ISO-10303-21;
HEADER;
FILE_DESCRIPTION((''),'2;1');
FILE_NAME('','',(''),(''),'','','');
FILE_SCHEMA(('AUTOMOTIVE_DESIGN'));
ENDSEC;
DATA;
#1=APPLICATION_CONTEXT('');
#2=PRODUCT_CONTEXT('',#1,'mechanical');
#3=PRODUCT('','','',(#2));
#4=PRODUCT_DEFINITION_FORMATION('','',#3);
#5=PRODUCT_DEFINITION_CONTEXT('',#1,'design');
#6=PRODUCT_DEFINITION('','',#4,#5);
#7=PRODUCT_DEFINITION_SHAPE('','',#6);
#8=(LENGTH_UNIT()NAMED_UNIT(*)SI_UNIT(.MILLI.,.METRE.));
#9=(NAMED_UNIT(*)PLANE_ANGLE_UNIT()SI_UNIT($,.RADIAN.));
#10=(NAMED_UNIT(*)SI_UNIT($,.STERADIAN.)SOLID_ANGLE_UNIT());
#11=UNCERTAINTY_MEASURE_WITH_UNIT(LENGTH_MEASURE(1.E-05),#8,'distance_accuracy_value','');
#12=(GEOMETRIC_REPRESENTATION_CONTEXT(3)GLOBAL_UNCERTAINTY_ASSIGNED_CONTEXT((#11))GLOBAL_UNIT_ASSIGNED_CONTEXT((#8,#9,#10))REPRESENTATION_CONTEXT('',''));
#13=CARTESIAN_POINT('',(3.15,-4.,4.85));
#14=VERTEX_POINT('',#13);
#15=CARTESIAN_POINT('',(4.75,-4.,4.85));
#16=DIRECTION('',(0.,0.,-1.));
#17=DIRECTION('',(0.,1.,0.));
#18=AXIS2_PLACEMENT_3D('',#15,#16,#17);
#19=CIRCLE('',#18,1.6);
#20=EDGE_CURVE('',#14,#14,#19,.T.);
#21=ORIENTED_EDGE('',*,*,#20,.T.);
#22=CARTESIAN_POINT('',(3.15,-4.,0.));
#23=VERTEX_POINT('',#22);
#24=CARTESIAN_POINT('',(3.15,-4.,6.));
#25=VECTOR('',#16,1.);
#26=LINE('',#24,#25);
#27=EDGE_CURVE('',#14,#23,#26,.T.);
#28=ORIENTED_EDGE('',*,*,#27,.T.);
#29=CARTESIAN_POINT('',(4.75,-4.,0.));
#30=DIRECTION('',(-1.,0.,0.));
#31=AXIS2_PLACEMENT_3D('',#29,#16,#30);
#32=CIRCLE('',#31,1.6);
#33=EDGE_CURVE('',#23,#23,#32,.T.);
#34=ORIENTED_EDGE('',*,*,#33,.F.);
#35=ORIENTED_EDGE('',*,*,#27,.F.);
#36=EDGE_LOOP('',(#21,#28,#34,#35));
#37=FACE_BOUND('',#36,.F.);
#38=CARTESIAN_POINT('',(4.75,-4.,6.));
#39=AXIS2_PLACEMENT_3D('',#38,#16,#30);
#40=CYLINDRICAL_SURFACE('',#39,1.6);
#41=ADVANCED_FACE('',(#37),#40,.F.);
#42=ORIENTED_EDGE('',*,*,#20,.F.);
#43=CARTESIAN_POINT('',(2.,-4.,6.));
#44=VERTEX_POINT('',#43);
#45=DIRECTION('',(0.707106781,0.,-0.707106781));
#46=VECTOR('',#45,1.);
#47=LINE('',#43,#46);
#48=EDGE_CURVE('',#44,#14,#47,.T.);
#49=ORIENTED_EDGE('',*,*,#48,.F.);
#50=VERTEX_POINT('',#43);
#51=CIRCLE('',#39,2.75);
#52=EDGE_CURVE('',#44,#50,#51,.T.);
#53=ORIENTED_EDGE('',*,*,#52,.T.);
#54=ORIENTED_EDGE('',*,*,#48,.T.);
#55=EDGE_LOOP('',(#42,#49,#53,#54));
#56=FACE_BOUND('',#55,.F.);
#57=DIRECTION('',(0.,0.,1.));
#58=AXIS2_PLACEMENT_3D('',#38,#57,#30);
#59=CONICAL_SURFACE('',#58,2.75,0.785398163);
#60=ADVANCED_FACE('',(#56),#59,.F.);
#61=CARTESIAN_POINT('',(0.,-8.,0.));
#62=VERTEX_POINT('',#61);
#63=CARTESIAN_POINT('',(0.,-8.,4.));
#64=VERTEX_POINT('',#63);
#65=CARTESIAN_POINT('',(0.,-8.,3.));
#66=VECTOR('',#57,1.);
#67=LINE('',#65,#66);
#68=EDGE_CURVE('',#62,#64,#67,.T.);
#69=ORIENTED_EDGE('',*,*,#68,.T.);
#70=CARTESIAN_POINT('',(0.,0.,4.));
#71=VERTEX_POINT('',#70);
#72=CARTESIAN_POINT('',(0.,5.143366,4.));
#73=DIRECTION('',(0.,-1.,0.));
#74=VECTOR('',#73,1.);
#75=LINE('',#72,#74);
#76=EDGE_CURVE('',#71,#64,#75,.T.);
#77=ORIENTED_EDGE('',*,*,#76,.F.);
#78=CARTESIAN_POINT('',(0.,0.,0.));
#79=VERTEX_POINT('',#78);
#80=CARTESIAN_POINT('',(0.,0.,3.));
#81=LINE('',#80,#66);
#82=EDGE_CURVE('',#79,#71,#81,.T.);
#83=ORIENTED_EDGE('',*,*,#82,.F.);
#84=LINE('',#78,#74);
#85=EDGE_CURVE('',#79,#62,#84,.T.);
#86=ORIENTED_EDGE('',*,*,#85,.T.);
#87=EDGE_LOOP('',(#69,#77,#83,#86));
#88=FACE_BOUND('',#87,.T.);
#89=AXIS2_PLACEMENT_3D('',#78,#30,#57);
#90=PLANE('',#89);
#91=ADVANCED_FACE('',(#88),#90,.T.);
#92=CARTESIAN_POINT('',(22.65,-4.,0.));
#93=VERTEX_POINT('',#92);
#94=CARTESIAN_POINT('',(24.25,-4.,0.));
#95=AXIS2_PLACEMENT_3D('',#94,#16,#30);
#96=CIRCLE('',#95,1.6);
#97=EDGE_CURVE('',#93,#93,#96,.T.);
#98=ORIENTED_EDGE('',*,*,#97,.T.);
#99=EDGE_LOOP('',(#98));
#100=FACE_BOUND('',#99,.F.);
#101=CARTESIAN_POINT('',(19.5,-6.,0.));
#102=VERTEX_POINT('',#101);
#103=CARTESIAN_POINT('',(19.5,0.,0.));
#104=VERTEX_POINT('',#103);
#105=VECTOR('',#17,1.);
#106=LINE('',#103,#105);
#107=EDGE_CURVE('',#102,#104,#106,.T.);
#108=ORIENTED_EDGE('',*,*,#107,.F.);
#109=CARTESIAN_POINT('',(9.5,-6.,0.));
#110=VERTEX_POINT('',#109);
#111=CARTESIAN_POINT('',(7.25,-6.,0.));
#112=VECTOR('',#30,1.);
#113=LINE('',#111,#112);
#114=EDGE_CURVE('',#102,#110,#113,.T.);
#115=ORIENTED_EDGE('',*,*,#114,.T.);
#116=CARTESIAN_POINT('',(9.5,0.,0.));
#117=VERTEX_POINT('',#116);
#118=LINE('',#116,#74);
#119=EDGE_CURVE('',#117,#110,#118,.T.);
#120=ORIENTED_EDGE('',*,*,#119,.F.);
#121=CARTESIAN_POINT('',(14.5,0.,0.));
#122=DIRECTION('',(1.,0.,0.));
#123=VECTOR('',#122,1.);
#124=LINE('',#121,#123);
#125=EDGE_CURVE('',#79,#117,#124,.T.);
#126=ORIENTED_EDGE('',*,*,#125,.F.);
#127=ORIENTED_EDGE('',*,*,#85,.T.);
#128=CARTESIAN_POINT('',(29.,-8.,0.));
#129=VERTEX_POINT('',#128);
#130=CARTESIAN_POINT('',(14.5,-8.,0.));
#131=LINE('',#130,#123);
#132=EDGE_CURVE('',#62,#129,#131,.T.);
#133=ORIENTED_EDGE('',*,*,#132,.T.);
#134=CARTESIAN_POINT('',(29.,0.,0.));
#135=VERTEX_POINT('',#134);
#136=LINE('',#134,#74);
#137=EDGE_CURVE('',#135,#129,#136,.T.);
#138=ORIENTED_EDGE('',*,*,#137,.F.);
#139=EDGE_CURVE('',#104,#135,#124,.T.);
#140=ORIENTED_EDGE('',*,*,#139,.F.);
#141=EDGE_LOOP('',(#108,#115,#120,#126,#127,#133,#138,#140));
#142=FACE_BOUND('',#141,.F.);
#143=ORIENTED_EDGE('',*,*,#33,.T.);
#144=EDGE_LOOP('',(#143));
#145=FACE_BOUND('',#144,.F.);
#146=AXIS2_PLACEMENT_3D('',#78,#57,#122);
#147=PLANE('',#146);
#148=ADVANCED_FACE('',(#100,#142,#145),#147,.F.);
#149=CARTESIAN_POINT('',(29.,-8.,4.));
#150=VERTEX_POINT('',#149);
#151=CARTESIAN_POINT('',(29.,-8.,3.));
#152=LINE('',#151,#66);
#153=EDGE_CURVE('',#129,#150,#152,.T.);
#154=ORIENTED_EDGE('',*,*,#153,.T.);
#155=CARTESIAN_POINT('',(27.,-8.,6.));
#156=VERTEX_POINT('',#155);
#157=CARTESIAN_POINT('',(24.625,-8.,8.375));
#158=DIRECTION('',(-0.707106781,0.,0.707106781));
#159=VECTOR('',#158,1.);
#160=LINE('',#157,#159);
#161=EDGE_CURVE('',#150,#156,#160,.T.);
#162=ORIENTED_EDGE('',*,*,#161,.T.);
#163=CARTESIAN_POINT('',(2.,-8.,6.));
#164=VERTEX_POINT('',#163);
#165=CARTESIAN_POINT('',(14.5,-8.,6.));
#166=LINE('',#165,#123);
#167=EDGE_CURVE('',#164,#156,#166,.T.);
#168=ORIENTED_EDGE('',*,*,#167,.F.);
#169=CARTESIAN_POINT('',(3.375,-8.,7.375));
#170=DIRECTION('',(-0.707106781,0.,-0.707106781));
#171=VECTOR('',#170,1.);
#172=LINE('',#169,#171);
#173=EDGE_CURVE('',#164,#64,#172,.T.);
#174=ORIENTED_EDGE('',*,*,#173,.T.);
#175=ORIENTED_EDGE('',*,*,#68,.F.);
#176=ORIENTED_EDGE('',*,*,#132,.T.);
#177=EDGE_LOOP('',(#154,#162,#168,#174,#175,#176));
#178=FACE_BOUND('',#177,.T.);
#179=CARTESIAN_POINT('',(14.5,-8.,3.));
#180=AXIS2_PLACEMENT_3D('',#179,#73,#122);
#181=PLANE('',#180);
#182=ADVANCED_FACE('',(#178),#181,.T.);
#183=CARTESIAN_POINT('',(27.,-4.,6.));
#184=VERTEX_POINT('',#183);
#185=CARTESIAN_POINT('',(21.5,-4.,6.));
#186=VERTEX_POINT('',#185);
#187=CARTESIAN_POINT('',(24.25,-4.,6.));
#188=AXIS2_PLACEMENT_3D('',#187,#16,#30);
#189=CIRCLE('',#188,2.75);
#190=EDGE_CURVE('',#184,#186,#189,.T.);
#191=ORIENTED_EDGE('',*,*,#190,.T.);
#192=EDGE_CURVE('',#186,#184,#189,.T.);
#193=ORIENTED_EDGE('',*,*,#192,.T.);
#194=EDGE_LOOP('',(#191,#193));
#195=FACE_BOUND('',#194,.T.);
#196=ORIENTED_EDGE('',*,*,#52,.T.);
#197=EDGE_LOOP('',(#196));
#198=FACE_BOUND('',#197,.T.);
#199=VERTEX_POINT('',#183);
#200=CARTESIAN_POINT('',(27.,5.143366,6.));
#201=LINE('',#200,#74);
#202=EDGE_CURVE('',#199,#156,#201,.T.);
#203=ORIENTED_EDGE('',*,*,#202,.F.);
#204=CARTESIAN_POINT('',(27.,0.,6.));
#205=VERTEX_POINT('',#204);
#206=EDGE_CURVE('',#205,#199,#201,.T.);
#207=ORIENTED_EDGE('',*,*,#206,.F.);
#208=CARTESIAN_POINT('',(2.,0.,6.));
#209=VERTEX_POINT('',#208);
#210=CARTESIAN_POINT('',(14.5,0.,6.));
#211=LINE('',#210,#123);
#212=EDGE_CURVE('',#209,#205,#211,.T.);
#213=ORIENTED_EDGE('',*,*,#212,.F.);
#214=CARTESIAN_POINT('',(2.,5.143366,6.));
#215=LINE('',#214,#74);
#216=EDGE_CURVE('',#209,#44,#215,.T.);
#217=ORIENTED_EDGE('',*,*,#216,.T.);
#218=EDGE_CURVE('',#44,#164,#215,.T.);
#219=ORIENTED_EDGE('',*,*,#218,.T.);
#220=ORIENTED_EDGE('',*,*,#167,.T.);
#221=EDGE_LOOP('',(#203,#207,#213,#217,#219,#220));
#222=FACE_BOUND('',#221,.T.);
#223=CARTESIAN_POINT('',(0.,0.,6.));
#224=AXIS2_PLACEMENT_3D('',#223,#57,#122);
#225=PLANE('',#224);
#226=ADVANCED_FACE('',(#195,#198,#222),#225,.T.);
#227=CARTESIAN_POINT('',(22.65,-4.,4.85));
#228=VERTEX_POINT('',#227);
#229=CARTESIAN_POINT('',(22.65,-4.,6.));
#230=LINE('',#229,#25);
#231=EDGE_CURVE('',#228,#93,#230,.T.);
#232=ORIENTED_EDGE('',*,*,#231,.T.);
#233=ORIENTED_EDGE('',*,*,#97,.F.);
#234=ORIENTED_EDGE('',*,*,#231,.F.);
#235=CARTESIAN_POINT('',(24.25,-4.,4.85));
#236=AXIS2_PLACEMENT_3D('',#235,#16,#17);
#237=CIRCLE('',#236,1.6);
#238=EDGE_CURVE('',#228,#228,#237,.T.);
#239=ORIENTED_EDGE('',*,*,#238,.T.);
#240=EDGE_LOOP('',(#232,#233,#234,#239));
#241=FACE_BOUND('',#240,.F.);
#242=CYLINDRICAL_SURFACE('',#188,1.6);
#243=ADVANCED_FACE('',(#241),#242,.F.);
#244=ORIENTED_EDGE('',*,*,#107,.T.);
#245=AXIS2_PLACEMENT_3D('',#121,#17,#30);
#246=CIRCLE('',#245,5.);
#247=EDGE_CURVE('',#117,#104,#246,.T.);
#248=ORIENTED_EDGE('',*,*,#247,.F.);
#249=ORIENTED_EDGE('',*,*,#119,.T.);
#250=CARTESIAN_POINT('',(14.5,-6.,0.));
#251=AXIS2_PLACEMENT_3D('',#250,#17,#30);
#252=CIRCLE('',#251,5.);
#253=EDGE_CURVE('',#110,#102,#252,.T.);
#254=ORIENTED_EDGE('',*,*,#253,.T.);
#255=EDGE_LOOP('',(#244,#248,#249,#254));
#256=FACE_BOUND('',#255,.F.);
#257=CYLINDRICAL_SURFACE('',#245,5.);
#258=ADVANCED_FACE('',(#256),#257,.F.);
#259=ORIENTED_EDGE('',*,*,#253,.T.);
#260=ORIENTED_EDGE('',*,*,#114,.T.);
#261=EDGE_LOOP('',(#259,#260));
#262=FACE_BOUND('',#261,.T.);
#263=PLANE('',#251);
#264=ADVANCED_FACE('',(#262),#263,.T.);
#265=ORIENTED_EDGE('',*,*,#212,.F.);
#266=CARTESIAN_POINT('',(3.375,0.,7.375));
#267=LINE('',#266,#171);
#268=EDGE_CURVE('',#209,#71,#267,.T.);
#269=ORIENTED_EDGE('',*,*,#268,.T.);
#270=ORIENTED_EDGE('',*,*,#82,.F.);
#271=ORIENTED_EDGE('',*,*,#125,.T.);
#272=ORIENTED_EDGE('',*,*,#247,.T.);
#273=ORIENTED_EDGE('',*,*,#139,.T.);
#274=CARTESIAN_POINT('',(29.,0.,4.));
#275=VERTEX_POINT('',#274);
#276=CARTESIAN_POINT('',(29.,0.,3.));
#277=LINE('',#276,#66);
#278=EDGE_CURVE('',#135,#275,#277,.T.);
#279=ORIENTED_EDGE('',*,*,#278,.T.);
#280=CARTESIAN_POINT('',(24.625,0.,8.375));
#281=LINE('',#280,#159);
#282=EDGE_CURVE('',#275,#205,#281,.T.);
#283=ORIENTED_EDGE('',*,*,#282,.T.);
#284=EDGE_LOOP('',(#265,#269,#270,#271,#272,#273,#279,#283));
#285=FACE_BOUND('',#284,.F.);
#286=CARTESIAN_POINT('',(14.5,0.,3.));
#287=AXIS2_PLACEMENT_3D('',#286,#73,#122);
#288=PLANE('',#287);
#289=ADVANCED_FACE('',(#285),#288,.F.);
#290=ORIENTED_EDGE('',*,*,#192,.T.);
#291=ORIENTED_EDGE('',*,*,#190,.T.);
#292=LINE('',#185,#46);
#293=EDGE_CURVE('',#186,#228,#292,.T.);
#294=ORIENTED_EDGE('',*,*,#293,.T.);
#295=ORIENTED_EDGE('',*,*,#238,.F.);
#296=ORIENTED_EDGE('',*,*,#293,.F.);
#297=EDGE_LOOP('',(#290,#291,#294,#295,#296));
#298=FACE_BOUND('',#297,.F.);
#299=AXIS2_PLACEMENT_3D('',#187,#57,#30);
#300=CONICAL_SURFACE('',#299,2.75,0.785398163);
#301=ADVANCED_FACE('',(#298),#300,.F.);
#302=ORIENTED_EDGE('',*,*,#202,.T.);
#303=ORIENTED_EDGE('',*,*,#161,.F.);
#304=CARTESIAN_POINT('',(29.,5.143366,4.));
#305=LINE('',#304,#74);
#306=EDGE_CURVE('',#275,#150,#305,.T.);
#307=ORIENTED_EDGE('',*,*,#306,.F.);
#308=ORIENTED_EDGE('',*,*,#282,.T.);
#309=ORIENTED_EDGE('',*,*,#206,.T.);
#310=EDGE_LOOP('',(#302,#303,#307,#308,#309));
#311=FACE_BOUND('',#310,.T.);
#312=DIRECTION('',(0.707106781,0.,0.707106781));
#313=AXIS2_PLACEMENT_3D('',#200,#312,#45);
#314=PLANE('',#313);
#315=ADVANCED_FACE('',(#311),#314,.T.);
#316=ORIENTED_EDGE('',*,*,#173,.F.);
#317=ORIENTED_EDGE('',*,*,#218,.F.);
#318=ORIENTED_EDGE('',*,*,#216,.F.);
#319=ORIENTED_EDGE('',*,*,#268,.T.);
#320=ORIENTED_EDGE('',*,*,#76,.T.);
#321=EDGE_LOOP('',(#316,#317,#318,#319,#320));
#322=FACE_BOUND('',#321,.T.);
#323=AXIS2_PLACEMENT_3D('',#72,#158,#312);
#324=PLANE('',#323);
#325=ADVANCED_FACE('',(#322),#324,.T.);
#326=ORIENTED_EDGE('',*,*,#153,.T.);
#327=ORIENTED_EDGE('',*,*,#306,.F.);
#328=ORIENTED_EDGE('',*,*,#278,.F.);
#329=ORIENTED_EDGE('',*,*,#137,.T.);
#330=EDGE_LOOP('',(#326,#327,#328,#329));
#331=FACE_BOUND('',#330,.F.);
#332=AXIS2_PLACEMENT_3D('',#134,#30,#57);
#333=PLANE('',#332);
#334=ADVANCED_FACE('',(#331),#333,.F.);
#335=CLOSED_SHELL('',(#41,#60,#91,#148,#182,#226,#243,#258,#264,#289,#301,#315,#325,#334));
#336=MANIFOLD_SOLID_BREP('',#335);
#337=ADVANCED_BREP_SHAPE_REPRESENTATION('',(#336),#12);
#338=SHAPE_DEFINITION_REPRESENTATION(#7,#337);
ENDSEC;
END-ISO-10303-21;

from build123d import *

# Parameters (mm, degrees)
F0_W           = 29
F0_H           = 6
F1_DEPTH       = 8
F2_R           = 5
F3_DEPTH       = 6
F5_D           = 3.2
F5_DEPTH       = 10
F5_CSINK_D     = 5.5
F5_CSINK_ANGLE = 90
F5_TIP         = 0.9613769904
F6_T1_DEPTH    = 18.2867319519


# Not quite as in the source:
# - a fillet or chamfer that OpenCascade refuses, or shapes differently, is made with other operations: its cross-section is extruded or revolved along the edge and cut away or added


with BuildPart() as f1:
    # F0 (on Front) → F1 (new body)
    with BuildSketch(Plane.XZ):
        with Locations((14.5, 3)):
            Rectangle(F0_W, F0_H)
    extrude(amount=F1_DEPTH)

    # F2 (on face) → F3 (cut)
    with BuildSketch(Plane(origin=(0, 0, 0), x_dir=(-1, 0, 0), z_dir=(0, 1, 0))):
        with Locations((-14.5, 0)):
            Circle(F2_R)
    extrude(amount=-F3_DEPTH, mode=Mode.SUBTRACT)

    # F5
    with Locations(Plane.XY.offset(6)):
        with Locations((4.75, -4), (24.25, -4)):
            CounterSinkHole(F5_D / 2, F5_CSINK_D / 2, depth=F5_DEPTH, counter_sink_angle=F5_CSINK_ANGLE)
            with Locations((0, 0, -(F5_DEPTH + F5_TIP / 2))):  # 118° drill point
                Cone(0, F5_D / 2, F5_TIP, mode=Mode.SUBTRACT)

    # F6: chamfer of 2 on 2 edges, made by hand

    # F6_s2 → F6_t1 (cut)
    with BuildSketch(Plane.XZ.offset(-5.1433659759)):
        Polygon((27, 6), (29, 4), (29, 6), align=None)
        Polygon((0, 4), (2, 6), (0, 6), align=None)
    extrude(amount=F6_T1_DEPTH, mode=Mode.SUBTRACT)


solid = f1.part
